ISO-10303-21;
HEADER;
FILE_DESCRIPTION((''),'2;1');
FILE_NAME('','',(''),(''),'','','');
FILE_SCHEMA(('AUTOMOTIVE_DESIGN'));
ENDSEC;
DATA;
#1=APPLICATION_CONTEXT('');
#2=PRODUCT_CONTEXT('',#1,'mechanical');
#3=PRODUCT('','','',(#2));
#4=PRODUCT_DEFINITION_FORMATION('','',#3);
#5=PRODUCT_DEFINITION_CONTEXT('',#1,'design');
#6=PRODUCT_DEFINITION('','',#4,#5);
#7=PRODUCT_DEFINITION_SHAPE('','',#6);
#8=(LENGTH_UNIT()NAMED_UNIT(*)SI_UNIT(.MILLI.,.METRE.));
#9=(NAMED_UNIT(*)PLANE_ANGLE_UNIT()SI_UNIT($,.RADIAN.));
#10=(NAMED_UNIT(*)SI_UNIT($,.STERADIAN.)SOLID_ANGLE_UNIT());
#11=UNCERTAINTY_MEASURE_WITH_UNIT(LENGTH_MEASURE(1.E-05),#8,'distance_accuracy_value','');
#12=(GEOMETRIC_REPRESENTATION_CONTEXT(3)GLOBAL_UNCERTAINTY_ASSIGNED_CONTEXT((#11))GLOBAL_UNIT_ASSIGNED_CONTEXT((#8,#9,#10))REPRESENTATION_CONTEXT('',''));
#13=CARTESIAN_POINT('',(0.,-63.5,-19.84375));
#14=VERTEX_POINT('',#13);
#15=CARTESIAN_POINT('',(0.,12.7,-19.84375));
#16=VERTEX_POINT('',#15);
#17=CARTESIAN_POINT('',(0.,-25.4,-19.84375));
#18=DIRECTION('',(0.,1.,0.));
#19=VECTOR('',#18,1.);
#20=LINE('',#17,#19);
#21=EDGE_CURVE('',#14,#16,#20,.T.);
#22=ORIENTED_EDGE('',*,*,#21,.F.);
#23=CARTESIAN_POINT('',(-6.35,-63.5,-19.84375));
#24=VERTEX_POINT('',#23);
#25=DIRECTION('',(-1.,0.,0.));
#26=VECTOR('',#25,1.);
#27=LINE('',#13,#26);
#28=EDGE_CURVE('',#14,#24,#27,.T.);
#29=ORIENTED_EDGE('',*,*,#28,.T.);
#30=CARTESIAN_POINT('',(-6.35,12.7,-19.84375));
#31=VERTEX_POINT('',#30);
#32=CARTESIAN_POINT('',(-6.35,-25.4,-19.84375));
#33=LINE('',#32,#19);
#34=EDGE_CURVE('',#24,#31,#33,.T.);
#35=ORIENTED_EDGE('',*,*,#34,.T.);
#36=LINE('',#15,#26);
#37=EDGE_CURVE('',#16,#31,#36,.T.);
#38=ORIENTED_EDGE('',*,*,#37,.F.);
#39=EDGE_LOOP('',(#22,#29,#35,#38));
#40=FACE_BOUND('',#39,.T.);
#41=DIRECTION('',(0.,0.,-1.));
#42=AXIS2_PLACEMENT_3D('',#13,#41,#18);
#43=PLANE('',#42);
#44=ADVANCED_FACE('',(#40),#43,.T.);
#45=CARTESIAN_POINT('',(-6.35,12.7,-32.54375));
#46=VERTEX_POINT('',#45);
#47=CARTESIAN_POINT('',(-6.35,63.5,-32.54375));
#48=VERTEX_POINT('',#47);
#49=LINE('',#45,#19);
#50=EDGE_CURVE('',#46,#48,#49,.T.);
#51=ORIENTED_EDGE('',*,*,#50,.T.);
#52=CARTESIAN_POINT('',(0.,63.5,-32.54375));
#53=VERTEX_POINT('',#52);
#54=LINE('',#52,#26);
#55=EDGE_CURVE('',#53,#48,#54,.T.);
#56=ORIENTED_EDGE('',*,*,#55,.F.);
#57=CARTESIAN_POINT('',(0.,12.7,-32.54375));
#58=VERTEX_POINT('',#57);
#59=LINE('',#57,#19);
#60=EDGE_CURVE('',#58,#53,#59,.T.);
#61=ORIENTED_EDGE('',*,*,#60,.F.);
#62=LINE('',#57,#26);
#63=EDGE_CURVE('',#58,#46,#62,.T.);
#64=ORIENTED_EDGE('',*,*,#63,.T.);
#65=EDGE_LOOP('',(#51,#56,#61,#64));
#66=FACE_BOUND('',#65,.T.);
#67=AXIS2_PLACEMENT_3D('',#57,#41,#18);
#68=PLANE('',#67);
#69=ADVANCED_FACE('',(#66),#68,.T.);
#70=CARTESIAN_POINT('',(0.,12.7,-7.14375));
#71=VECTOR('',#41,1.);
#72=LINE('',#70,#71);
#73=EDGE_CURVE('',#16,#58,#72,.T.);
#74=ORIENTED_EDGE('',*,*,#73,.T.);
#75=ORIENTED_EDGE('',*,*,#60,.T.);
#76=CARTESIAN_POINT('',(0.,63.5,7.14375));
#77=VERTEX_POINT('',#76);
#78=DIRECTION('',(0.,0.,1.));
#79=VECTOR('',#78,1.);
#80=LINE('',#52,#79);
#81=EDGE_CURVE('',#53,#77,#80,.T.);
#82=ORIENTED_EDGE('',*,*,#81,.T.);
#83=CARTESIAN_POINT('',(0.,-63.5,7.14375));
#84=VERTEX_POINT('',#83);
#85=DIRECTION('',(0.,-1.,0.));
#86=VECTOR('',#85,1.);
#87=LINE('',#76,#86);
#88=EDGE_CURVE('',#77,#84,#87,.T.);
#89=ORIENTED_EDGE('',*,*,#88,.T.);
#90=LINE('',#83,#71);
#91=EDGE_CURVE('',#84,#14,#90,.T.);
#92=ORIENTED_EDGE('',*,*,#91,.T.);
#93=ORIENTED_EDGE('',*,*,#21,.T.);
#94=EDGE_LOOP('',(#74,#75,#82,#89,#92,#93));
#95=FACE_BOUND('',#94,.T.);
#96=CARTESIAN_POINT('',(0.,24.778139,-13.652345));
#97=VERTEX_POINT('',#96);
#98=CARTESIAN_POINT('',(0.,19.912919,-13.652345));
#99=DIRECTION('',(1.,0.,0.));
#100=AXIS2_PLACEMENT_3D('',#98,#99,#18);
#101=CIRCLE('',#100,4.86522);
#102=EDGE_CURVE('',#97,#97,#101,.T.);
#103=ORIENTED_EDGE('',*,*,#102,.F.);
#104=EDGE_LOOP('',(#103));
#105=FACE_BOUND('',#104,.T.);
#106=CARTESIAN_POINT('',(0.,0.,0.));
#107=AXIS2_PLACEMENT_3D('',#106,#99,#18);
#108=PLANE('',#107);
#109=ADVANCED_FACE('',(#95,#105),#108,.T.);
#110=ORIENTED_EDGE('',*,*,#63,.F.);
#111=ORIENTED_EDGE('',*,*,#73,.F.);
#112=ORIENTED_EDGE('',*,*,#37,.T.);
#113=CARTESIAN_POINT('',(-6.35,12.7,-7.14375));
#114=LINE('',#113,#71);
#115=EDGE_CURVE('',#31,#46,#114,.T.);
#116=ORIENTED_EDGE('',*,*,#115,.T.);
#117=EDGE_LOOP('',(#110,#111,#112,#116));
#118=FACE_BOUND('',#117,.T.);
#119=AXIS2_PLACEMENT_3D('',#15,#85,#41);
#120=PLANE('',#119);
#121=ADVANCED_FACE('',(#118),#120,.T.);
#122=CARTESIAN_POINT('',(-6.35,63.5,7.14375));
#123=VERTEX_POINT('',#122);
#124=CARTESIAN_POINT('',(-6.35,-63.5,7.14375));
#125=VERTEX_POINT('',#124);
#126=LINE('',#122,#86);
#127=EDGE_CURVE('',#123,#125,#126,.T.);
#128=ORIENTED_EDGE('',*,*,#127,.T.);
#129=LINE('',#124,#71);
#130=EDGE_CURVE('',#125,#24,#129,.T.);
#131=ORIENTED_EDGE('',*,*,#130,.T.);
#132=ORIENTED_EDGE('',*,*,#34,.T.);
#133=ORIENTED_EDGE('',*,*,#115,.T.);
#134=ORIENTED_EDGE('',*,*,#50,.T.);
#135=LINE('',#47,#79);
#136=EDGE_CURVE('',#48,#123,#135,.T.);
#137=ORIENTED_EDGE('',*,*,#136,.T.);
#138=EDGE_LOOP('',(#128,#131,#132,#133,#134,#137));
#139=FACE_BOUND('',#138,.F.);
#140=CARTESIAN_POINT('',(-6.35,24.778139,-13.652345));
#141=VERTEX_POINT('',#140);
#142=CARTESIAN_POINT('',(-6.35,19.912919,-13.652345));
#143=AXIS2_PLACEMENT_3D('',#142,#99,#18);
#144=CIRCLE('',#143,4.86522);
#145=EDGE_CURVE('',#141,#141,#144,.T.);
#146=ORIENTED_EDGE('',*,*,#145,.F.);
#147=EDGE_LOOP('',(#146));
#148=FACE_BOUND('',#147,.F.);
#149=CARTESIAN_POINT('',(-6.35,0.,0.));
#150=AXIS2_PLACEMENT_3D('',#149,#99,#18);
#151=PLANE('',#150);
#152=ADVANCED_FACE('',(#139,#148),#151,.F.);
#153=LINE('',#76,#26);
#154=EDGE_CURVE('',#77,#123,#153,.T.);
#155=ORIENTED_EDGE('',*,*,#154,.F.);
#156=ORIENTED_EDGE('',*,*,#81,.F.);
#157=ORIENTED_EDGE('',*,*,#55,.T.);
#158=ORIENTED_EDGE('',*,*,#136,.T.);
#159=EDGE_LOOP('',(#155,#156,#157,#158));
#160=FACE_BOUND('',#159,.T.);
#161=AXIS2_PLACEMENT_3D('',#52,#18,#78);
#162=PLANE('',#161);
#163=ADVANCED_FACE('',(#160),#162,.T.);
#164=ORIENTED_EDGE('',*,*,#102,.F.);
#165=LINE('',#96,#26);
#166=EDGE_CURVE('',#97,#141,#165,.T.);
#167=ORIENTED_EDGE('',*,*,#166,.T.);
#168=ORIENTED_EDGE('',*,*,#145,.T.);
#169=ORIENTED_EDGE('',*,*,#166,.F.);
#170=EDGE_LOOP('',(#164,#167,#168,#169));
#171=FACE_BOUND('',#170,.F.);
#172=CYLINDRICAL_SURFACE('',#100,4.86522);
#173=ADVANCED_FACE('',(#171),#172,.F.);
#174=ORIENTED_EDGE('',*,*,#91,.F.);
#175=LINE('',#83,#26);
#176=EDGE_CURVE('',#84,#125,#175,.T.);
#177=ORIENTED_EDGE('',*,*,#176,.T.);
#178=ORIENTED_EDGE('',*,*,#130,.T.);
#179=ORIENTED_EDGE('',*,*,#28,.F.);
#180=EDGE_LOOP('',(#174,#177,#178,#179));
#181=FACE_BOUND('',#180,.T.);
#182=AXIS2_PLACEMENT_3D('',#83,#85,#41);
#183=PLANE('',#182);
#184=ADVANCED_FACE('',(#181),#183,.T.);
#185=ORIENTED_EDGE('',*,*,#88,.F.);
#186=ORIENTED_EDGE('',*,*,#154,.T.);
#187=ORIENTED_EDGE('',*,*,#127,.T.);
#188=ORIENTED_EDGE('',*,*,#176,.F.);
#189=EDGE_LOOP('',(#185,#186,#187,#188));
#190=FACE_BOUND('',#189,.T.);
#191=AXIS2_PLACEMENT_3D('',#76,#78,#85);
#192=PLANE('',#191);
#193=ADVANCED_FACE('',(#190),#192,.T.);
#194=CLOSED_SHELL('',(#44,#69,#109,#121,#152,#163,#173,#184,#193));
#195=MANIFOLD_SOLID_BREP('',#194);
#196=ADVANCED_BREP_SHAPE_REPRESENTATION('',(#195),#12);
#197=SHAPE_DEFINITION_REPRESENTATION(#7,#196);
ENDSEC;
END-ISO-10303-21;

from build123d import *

# Parameters (mm, degrees)
F0_R     = 4.8652202412
F0_W     = 76.2
F0_H     = 12.7
F1_DEPTH = 6.35


# Not quite as in the source:
# - a length typed as a fraction of an inch, garbled in the dataset ("3 / 203.2 mm" for 3/8 in), is restored
# - a feature names something its author has since deleted; it is built from what else it names


with BuildPart() as f1:
    # F0 (on Right) → F1 (new body)
    with BuildSketch(Plane.YZ):
        Polygon((63.5, 7.14375), (-63.5, 7.14375), (-63.5, -7.14375), (12.7, -7.14375), (63.5, -7.14375), align=None)
        Polygon((63.5, -32.54375), (63.5, -7.14375), (12.7, -7.14375), (12.7, -19.84375), (12.7, -32.54375), align=None)
        with Locations((19.9129190296, -13.6523451656)):
            Circle(F0_R, mode=Mode.SUBTRACT)
        with Locations((-25.4, -13.49375)):
            Rectangle(F0_W, F0_H)
    extrude(amount=-F1_DEPTH)


solid = f1.part
